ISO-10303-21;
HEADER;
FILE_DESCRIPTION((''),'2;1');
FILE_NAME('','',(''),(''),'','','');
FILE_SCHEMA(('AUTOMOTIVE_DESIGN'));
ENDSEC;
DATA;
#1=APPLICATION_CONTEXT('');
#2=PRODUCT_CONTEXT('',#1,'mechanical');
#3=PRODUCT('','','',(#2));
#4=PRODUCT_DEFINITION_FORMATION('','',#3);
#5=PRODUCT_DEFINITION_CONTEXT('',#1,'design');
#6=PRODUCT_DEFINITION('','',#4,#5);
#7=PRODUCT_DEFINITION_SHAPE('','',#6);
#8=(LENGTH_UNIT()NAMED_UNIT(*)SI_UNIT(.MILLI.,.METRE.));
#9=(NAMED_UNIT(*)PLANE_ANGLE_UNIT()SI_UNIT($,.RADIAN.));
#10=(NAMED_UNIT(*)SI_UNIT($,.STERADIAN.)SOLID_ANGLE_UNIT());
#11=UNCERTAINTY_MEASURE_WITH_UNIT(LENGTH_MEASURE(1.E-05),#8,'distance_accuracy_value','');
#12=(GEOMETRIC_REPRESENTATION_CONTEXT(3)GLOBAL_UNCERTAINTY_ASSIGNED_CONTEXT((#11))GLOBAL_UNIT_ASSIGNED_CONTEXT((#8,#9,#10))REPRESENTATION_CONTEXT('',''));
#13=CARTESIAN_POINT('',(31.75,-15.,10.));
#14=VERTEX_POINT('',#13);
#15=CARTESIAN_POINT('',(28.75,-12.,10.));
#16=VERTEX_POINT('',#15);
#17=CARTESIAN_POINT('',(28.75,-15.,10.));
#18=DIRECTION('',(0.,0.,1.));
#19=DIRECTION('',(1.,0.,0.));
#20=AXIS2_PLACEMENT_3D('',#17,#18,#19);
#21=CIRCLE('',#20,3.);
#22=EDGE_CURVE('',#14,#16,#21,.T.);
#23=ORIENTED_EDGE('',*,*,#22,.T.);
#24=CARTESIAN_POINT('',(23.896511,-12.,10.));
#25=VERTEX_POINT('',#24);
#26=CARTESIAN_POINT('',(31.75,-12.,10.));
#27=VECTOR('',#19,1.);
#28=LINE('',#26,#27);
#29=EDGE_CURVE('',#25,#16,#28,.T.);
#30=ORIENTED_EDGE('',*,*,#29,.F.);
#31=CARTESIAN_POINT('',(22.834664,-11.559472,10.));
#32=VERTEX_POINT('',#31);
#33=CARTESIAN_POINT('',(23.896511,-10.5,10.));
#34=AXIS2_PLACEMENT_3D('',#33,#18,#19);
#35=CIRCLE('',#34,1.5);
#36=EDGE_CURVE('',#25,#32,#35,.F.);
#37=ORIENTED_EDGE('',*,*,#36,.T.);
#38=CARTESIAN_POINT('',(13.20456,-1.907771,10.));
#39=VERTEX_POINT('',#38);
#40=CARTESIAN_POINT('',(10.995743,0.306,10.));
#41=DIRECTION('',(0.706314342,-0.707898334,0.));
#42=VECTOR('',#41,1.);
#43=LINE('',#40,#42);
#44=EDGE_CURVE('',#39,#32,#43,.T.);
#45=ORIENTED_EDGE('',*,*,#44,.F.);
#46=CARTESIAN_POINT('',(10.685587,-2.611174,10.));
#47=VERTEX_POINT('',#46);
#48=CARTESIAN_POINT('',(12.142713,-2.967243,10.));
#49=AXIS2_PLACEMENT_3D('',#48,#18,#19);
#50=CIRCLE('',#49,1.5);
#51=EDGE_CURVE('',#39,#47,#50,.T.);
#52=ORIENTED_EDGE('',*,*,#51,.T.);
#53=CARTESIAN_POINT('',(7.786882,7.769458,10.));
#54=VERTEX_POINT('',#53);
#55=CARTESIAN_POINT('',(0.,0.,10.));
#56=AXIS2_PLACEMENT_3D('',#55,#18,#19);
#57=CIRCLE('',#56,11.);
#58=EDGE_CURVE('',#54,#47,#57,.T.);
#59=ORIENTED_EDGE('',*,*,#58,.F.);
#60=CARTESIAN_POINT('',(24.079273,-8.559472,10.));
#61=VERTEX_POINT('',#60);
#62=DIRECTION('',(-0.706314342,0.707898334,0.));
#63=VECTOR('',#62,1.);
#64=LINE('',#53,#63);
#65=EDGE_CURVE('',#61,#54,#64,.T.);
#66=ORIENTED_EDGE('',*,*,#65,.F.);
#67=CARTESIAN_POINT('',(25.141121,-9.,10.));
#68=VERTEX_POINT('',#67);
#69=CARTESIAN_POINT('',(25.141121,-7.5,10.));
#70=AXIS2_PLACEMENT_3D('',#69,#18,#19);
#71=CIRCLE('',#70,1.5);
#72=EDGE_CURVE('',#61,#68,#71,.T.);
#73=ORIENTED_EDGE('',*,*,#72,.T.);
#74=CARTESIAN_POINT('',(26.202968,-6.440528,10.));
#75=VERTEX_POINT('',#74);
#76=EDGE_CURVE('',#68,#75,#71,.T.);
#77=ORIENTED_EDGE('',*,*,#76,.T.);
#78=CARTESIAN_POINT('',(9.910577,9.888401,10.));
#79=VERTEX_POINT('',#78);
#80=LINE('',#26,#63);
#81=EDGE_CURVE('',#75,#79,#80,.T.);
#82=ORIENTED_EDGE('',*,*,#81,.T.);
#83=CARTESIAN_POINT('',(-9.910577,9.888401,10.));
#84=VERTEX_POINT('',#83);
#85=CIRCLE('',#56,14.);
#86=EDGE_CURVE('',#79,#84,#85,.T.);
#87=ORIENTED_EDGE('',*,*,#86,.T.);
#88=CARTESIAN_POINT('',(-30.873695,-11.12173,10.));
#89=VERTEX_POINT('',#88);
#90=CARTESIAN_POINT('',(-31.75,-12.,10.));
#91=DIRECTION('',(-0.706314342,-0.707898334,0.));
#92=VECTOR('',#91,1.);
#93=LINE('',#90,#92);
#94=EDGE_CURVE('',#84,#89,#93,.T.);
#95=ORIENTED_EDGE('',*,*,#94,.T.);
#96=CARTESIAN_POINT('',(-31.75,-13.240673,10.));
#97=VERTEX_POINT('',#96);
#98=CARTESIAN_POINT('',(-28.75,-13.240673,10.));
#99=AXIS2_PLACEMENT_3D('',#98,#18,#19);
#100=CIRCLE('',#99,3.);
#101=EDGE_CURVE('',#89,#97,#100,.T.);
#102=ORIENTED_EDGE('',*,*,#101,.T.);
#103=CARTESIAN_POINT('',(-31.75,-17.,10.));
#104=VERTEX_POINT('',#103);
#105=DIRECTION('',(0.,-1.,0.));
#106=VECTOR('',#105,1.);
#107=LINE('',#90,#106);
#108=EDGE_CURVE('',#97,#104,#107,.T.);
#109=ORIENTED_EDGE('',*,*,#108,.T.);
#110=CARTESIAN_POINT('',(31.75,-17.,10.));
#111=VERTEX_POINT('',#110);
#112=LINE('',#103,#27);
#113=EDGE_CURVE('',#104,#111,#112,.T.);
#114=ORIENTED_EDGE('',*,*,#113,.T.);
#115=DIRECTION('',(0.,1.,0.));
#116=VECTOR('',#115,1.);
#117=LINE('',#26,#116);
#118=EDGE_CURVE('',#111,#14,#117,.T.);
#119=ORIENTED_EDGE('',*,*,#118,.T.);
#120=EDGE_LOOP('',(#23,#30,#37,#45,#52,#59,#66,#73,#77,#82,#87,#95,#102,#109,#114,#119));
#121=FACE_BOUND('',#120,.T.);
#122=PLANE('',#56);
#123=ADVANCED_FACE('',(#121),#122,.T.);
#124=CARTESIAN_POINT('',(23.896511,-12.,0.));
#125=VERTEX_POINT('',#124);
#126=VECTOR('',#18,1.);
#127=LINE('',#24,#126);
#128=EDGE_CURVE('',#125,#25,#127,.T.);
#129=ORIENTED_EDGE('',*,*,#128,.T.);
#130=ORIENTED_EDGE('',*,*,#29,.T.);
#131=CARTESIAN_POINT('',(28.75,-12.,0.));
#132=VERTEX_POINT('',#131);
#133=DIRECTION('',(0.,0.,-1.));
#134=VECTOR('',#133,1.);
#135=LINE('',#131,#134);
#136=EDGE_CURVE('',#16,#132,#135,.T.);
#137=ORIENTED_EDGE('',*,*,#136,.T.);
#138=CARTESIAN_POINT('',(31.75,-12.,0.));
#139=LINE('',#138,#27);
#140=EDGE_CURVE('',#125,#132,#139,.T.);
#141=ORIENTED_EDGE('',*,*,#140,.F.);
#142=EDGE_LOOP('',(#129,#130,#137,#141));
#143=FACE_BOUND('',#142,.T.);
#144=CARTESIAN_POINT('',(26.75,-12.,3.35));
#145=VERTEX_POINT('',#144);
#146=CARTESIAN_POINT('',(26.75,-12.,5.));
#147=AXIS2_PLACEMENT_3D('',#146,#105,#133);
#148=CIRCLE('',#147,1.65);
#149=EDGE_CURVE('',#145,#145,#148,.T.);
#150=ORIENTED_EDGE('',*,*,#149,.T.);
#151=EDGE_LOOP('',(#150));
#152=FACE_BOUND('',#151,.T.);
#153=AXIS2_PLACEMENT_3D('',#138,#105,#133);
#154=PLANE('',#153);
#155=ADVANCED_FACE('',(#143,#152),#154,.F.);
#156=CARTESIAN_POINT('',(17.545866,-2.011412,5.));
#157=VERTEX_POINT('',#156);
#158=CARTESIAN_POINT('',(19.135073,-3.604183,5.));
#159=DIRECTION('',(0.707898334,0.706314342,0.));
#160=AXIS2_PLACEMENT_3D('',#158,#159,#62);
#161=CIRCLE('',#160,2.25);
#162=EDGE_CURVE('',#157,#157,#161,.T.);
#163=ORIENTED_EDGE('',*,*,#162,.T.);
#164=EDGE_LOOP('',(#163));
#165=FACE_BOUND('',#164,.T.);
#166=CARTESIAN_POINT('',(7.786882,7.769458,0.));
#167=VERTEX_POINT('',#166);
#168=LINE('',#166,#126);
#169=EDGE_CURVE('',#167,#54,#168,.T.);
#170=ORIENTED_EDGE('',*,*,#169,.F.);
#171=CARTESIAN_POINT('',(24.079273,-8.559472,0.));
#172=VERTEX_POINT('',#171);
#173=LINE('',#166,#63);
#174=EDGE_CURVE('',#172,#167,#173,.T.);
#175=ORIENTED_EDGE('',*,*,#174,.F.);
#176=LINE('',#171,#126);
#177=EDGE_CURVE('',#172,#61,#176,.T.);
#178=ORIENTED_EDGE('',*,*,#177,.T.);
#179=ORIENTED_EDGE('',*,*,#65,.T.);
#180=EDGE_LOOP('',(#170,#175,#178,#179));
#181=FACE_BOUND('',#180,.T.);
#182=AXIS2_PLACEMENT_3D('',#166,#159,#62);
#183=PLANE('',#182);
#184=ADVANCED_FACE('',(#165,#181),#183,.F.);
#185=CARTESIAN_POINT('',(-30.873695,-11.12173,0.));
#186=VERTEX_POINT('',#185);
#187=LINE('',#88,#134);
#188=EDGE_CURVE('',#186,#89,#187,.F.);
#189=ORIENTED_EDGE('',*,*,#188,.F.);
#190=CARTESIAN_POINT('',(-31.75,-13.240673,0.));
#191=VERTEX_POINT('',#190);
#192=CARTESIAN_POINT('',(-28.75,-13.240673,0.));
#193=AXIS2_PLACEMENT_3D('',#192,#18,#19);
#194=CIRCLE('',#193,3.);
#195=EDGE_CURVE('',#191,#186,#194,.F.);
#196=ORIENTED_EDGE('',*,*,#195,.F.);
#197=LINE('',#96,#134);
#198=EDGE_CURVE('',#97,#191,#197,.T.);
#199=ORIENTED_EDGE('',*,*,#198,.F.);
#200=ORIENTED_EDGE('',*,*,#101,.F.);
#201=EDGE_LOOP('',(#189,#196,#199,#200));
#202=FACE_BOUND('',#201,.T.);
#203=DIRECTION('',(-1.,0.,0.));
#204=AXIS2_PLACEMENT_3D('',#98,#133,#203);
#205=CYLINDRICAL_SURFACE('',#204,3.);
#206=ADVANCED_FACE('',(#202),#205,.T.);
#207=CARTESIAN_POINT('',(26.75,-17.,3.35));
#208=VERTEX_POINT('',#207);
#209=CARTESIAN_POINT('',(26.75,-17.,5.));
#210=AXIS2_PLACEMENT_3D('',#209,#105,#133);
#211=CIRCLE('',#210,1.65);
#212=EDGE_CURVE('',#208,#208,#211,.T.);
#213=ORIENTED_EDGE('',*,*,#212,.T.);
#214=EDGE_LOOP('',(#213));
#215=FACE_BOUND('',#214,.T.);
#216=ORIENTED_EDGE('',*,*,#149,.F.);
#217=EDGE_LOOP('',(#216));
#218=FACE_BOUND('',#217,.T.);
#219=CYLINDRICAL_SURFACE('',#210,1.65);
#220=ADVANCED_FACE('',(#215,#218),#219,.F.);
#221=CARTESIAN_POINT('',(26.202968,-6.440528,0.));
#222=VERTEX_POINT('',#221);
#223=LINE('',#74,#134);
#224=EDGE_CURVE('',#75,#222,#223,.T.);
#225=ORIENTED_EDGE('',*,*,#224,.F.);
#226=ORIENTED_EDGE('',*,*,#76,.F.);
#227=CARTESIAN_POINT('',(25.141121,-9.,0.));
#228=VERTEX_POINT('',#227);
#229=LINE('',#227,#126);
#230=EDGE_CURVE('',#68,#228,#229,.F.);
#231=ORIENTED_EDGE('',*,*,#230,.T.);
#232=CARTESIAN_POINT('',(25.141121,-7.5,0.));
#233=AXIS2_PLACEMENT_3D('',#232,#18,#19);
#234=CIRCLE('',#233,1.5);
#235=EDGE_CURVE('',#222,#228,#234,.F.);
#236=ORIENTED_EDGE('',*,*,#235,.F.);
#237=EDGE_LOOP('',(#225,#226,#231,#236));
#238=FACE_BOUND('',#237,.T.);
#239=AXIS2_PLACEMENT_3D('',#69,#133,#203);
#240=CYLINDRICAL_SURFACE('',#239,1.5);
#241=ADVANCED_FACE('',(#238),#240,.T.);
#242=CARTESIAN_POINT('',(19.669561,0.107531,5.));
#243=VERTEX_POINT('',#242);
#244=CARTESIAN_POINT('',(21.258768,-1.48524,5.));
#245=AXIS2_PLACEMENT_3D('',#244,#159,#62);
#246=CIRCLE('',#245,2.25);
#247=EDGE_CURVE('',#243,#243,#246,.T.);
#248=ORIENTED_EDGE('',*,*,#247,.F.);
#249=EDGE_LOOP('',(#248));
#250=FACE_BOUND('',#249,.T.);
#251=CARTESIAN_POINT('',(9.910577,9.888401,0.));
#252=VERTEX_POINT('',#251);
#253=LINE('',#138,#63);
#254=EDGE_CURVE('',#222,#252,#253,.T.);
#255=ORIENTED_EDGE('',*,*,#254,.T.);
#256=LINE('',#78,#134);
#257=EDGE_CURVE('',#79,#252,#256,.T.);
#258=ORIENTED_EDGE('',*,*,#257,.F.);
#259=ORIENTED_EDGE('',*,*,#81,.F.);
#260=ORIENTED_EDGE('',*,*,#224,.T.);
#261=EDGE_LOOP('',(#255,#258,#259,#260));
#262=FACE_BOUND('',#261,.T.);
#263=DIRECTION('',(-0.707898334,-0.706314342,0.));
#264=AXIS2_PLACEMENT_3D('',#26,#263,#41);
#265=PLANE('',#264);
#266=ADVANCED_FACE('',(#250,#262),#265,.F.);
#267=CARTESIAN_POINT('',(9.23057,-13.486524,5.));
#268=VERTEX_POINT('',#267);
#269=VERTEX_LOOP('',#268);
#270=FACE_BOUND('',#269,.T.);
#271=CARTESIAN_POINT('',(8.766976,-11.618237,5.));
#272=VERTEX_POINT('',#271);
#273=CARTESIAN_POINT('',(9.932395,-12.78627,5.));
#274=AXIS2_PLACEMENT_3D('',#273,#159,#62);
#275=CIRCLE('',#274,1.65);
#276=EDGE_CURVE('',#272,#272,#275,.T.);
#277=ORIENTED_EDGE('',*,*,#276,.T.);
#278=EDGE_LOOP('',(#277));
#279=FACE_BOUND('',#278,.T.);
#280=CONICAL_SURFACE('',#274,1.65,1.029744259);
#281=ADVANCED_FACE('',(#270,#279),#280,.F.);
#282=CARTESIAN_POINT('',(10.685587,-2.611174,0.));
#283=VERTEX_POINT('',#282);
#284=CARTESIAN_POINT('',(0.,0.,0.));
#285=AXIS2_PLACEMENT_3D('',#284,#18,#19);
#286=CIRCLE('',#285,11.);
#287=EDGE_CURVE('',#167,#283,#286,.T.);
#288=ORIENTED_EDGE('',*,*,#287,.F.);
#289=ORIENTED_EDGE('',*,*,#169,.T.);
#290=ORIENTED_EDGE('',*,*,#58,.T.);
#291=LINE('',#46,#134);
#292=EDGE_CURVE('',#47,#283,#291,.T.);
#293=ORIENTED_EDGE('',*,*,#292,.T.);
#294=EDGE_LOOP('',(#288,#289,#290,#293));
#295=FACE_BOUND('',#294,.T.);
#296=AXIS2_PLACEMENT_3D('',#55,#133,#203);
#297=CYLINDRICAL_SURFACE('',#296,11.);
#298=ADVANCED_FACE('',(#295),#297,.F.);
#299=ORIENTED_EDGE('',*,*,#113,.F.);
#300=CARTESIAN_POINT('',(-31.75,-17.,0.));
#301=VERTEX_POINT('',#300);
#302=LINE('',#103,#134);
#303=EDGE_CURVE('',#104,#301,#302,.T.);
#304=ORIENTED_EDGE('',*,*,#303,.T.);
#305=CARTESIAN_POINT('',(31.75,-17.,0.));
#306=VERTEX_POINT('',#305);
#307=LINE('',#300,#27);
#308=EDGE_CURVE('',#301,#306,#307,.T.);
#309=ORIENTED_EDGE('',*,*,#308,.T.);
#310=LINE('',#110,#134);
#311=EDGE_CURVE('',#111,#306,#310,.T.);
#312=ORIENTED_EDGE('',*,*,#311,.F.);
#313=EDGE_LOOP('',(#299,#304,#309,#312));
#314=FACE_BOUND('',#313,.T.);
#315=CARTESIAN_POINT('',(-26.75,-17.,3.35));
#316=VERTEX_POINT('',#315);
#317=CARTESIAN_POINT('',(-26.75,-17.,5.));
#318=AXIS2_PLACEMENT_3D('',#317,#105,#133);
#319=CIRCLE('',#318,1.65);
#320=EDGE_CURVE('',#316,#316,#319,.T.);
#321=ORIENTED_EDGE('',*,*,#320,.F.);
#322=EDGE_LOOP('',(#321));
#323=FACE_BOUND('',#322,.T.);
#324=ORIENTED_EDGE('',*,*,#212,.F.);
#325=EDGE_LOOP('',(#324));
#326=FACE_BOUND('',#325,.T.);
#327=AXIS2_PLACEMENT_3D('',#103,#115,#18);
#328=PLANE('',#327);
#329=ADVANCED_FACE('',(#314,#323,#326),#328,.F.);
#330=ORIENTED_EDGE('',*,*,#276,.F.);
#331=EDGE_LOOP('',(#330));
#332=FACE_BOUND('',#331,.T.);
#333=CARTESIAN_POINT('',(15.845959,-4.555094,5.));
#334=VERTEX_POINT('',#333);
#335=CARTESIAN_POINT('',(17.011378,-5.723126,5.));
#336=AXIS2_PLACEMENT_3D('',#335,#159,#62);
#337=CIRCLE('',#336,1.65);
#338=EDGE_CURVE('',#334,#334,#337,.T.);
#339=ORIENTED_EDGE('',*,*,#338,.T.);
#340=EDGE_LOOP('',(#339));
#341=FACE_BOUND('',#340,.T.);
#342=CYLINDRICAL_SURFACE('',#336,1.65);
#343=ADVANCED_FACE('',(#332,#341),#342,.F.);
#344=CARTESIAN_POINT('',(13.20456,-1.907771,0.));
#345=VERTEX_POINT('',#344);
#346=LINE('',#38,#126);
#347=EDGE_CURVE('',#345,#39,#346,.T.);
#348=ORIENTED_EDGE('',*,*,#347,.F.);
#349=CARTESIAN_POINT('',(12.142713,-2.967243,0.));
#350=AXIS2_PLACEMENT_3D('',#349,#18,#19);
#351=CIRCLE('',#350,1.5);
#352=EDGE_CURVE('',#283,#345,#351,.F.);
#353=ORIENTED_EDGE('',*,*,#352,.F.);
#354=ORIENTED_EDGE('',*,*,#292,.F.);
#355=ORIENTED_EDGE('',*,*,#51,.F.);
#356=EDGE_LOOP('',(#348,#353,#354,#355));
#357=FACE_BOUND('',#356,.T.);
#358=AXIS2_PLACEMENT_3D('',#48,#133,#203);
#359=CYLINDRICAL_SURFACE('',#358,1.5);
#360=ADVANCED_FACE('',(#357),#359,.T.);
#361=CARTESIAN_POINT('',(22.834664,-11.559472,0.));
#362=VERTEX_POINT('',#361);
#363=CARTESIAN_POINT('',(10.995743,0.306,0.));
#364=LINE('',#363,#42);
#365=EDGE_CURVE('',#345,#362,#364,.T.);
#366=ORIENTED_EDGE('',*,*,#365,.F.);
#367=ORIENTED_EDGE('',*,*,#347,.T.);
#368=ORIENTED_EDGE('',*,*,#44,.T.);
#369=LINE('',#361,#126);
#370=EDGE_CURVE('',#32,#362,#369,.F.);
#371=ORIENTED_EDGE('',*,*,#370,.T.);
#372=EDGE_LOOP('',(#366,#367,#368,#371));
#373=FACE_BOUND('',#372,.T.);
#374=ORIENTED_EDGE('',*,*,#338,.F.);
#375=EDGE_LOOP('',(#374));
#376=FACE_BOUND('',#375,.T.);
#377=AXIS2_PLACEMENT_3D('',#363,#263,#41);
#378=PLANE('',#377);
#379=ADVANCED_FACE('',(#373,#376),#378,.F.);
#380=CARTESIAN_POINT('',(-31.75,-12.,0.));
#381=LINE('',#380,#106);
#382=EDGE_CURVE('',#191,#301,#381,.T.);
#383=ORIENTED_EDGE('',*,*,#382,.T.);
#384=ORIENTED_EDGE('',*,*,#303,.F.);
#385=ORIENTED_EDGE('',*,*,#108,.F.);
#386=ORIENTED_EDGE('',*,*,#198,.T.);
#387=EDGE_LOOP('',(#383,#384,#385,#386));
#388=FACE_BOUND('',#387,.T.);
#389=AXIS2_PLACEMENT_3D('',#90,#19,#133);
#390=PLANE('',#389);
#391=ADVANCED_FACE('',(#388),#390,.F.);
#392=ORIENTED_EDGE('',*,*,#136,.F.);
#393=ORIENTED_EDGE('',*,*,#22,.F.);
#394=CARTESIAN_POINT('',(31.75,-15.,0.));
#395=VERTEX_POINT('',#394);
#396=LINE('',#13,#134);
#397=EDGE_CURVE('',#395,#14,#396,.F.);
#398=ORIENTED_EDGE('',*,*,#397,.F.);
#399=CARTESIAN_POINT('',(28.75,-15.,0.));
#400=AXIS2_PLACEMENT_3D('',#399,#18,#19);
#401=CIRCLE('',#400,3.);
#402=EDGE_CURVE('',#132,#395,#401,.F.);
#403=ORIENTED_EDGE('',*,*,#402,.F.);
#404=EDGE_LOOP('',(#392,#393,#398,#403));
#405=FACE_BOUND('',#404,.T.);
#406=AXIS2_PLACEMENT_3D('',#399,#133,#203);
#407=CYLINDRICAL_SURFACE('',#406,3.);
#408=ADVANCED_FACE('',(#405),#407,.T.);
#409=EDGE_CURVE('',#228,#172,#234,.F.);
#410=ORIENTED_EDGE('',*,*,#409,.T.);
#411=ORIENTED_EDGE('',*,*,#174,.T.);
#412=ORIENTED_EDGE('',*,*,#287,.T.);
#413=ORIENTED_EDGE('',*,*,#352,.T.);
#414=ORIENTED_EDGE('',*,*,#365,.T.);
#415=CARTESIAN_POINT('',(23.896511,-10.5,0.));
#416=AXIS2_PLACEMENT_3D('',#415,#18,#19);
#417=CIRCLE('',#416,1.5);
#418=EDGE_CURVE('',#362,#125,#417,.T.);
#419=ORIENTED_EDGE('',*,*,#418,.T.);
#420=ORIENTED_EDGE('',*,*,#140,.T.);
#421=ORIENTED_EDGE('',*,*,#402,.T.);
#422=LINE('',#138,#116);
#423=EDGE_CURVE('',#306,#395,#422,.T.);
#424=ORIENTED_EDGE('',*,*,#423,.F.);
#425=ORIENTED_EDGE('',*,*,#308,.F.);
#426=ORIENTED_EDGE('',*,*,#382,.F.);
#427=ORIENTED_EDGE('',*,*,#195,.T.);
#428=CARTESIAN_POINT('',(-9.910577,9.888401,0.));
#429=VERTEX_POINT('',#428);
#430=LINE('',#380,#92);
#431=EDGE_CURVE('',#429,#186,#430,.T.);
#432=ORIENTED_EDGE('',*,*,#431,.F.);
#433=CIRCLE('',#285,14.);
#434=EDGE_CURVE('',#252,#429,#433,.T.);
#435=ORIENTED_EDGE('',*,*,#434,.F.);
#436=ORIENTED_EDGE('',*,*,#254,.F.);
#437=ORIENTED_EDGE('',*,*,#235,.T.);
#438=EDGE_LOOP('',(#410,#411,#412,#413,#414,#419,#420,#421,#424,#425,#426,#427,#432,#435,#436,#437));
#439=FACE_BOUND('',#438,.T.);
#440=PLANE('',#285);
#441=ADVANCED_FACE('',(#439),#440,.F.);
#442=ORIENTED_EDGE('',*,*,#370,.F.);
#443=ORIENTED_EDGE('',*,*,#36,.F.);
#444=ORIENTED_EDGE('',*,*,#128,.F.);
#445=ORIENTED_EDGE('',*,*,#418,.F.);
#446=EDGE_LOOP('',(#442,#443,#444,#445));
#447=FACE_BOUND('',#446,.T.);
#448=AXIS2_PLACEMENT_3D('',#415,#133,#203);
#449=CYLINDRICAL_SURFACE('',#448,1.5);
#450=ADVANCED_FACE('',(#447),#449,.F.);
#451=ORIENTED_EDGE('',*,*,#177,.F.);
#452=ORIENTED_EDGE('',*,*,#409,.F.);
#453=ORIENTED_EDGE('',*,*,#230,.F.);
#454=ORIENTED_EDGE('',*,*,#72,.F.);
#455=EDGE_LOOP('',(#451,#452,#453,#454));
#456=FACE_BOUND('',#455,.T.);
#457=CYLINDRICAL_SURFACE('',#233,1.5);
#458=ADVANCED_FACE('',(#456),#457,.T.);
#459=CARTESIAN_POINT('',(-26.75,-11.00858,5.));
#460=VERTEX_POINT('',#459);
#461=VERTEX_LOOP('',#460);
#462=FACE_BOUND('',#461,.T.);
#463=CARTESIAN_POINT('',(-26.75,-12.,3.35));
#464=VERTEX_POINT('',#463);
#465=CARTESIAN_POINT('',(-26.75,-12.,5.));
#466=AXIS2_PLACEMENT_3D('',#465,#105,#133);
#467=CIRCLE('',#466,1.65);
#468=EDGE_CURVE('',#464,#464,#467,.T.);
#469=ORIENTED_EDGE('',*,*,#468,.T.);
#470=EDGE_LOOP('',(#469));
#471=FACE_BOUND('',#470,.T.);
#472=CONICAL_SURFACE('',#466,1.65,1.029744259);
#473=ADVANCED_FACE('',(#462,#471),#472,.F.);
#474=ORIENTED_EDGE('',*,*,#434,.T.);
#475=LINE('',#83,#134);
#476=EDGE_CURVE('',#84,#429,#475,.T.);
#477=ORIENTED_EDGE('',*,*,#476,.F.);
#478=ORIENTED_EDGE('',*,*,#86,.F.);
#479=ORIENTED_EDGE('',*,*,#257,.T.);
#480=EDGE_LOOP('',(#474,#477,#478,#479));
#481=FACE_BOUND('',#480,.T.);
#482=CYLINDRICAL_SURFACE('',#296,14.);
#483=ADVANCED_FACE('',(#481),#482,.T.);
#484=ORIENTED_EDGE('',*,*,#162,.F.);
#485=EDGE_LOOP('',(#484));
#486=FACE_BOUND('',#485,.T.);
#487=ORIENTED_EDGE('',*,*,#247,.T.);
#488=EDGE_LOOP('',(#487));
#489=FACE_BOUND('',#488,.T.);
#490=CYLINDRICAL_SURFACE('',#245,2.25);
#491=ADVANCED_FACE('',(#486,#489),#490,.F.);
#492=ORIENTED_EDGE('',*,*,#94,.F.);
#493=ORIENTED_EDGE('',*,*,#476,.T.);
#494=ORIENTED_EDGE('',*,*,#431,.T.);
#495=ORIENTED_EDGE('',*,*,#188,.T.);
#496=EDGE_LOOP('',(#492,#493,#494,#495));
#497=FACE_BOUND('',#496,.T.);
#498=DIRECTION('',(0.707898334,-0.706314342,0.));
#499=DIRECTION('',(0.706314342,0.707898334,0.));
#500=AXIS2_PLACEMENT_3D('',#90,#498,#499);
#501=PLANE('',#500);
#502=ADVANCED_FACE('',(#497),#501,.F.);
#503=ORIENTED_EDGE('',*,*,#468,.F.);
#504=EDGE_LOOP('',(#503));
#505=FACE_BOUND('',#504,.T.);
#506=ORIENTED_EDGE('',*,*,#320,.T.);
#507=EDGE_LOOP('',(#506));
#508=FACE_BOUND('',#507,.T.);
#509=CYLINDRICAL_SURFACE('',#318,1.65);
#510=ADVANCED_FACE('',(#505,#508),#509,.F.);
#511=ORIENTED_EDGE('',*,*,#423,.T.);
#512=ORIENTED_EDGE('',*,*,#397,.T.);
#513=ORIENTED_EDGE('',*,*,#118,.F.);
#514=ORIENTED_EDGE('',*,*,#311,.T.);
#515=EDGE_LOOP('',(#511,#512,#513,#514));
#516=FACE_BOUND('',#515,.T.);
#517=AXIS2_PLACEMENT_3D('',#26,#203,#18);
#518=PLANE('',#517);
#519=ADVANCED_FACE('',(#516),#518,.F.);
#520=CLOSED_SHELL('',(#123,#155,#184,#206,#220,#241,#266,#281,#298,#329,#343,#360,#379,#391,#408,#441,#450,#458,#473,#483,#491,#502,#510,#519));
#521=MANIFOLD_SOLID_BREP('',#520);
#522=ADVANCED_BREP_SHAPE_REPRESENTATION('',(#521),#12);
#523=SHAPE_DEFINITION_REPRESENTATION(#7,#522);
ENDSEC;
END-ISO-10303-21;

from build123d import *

# Parameters (mm, degrees)
SKETCH_1_R            = 11
EXTRUDE_1_DEPTH       = 10
CUT_EXTRUDE_1_DEPTH   = 38.37729926
FILLET_1_R            = 1.5
M4X0_71_D             = 3.3
M4X0_71_DEPTH         = 5
M4X0_71_TIP           = 0.991420021
HOLE_WIZARD_M41_D     = 4.5
HOLE_WIZARD_M41_DEPTH = 3
M4X0_72_D             = 3.3
M4X0_72_DEPTH         = 10
M4X0_72_TIP           = 0.991420021
FILLET_2_R            = 3


with BuildPart() as part:
    # Эскиз1 → Бобышка-Вытянуть1 (new body)
    with BuildSketch(Plane.XY):
        with BuildLine():
            Line((-31.75, -12), (-9.910576673, 9.888400781))
            ThreePointArc((-9.910576673, 9.888400781), (0, 14), (9.910576673, 9.888400781))
            Line((9.910576673, 9.888400781), (31.75, -12))
            Line((31.75, -12), (31.75, -17))
            Line((31.75, -17), (-31.75, -17))
            Line((-31.75, -17), (-31.75, -12))
        make_face()
        Circle(SKETCH_1_R, mode=Mode.SUBTRACT)
    extrude(amount=EXTRUDE_1_DEPTH)

    # Эскиз2 → Вырез-Вытянуть1 (cut, through all)
    with BuildSketch(Plane.XY.offset(10)):
        Polygon((7.786881672, 7.769457757), (24.518816114, -9), (31.75, -9), (31.75, -12), (23.274206636, -12), (10.995743008, 0.305999515), align=None)
    extrude(amount=-CUT_EXTRUDE_1_DEPTH, mode=Mode.SUBTRACT)

    # Скругление1
    fillet_1_edges = [part.edges().sort_by_distance(p)[0] for p in [
        (23.274206636, -12, 5),
        (24.518816114, -9, 5),
        (28.756712796, -9, 5),
        (10.995743008, 0.305999515, 5),
    ]]
    fillet(fillet_1_edges, radius=FILLET_1_R - 0.0001)  # a hair under: the kernel refuses the full size

    # Отверстие обработанное метчиком M4x0.71
    with Locations(Plane(origin=(0, -17, 0), x_dir=(-1, 0, 0), z_dir=(0, -1, 0))):
        with Locations((26.75, -5), (-26.75, -5)):
            Hole(M4X0_71_D / 2, depth=M4X0_71_DEPTH)
            with Locations((0, 0, -(M4X0_71_DEPTH + M4X0_71_TIP / 2))):  # 118° drill point
                Cone(0, M4X0_71_D / 2, M4X0_71_TIP, mode=Mode.SUBTRACT)

    # Отверстие с зазором M41
    with Locations(Plane(origin=(9.910576673, 9.888400781, 0), x_dir=(0, 0, -1), z_dir=(0.7078983337955254, 0.7063143415006656, 0))):
        with Locations((-5, -16.066771723)):
            Hole(HOLE_WIZARD_M41_D / 2, depth=HOLE_WIZARD_M41_DEPTH)

    # Отверстие обработанное метчиком M4x0.72
    with Locations(Plane(origin=(5.66318667, 5.650514732, 0), x_dir=(0, 0, -1), z_dir=(0.7078983337955258, 0.7063143415006653, 0))):
        with Locations((-5, -16.066771723)):
            Hole(M4X0_72_D / 2, depth=M4X0_72_DEPTH)
            with Locations((0, 0, -(M4X0_72_DEPTH + M4X0_72_TIP / 2))):  # 118° drill point
                Cone(0, M4X0_72_D / 2, M4X0_72_TIP, mode=Mode.SUBTRACT)

    # Скругление2
    fillet_2_edges = [part.edges().sort_by_distance(p)[0] for p in [
        (-31.75, -12, 5),
        (31.75, -12, 5),
    ]]
    fillet(fillet_2_edges, radius=FILLET_2_R)


solid = part.part
